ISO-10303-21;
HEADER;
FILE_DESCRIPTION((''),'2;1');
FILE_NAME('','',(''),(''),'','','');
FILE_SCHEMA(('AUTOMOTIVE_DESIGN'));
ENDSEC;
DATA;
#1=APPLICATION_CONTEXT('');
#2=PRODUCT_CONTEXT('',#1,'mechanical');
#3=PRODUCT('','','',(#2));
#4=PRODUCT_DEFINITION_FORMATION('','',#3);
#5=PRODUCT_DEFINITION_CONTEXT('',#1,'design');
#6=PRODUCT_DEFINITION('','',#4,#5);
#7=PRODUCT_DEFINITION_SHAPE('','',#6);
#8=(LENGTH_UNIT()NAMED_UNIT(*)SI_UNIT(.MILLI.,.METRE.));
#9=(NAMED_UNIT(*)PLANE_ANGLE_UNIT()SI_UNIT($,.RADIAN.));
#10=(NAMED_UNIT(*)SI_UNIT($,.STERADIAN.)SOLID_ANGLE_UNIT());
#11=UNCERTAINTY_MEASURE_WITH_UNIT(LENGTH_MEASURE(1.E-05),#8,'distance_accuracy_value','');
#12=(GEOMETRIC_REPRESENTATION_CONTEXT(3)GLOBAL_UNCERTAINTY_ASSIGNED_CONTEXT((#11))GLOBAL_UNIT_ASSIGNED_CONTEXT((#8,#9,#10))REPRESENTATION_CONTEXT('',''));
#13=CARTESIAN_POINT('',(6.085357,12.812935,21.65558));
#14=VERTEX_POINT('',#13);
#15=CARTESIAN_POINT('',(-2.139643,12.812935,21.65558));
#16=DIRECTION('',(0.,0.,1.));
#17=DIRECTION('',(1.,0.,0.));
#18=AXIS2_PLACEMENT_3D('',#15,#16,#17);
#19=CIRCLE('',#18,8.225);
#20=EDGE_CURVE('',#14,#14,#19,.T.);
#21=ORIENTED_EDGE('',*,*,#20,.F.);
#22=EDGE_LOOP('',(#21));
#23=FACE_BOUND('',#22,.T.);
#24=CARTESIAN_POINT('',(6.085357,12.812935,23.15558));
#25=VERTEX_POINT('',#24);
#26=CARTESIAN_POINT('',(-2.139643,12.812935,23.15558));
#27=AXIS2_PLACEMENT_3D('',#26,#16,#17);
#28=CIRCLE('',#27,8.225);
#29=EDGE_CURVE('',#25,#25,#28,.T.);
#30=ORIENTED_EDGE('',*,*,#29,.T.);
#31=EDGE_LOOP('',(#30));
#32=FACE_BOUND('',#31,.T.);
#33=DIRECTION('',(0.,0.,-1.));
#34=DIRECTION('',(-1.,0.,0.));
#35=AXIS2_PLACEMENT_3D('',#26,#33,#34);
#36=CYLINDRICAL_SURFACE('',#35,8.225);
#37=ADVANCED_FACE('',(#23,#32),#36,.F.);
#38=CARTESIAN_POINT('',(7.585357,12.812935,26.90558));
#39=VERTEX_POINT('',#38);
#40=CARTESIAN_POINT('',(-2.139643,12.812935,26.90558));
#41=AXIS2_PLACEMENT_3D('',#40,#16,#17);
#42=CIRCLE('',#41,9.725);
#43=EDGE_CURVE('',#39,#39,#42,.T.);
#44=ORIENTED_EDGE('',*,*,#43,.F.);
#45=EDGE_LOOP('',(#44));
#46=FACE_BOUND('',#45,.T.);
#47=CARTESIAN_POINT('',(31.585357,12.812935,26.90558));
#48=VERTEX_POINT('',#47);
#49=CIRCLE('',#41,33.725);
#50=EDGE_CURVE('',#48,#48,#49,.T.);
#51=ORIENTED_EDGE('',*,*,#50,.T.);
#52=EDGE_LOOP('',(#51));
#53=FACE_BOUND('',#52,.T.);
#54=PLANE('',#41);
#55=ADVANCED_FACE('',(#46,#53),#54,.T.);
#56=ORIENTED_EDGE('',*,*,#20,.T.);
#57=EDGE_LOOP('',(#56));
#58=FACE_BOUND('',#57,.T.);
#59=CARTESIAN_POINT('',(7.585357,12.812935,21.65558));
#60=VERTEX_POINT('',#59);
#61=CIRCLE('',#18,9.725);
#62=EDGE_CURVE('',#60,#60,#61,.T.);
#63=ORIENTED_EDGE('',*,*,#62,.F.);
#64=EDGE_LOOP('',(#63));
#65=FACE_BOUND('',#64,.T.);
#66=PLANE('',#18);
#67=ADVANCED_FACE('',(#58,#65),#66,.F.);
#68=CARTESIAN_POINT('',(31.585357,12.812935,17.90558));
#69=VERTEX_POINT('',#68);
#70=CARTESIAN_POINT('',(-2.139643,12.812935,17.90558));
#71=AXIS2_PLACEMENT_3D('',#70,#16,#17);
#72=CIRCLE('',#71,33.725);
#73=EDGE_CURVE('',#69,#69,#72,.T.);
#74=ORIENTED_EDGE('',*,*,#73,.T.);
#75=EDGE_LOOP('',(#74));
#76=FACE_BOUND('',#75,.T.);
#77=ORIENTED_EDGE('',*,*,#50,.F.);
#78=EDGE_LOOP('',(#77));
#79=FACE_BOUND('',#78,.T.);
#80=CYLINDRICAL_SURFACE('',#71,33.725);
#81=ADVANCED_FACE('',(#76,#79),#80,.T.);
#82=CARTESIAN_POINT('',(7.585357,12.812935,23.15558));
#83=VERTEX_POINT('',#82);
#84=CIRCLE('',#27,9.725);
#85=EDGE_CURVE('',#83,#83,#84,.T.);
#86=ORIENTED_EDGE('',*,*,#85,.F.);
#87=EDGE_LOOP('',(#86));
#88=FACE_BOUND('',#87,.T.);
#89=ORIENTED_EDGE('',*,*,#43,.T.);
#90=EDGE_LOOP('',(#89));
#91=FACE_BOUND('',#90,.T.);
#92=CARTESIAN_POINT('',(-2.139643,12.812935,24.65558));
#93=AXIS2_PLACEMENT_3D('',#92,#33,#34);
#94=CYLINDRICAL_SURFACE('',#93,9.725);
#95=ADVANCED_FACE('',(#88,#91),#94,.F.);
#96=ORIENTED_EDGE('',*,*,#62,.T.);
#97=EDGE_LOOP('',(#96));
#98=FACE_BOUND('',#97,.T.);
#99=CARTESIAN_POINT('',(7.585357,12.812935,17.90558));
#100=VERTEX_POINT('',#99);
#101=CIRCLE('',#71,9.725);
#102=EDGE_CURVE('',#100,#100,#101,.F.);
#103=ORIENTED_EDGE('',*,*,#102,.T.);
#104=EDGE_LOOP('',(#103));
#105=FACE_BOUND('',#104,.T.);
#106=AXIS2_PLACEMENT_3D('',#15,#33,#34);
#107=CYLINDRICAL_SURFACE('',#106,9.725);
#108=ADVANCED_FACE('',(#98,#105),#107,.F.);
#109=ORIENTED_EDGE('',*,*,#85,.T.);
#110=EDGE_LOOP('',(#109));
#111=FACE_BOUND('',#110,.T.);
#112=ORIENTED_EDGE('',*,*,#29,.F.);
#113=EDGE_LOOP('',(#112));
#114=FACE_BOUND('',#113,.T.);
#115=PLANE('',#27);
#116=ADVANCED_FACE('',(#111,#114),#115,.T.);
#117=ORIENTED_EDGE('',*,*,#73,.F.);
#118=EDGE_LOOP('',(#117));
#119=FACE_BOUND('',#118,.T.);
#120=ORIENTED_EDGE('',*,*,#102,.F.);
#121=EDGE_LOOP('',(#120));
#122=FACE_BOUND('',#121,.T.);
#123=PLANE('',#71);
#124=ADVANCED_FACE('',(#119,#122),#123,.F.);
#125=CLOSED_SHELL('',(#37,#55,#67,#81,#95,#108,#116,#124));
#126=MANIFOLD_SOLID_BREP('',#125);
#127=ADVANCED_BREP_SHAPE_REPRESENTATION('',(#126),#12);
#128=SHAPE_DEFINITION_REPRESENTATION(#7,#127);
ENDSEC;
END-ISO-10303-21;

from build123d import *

# Parameters (mm, degrees)
BOSS_EXTRUDE1_DEPTH      = 4.5
BOSS_EXTRUDE1_DEPTH_BACK = 4.5
SKETCH1_R                = 33.725
CAVITY1_START            = 20.155580463
CAVITY1_OUTLINE_R        = 8.225
CAVITY1_DEPTH            = 4.5
CAVITY1_2_OUTLINE_R      = 9.725
CAVITY1_2_OUTLINE_R_2    = 8.225
CAVITY1_2_DEPTH          = 1.5
CAVITY1_START_2          = 23.155580463
CAVITY1_3_OUTLINE_R      = 9.725
CAVITY1_3_OUTLINE_R_2    = 8.225
CAVITY1_3_DEPTH          = 1.5
CAVITY1_START_3          = 17.905580463
CAVITY1_4_OUTLINE_R      = 3.725
CAVITY1_4_DEPTH          = 2.25
CAVITY1_5_DEPTH          = 2.25
CUT_EXTRUDE1_START       = 2.25
SKETCH1_3_R              = 9.725
CUT_EXTRUDE1_DEPTH       = 2.25
CUT_EXTRUDE2_DEPTH       = 2.25


with BuildPart() as part:
    # Sketch1 → Boss-Extrude1 (new, two sides: drawn at the far end of the back side and taken through both)
    with BuildSketch(Plane.XY.offset(22.405580463).offset(-BOSS_EXTRUDE1_DEPTH_BACK)):
        with Locations((-2.139643456, 12.812935379)):
            Circle(SKETCH1_R)
    extrude(amount=BOSS_EXTRUDE1_DEPTH + BOSS_EXTRUDE1_DEPTH_BACK)

    # Cavity1: read off the stored shape, not the designer's step
    # Cavity1 outline → Cavity1 (cut)
    with BuildSketch(Plane.XY.offset(CAVITY1_START)):
        with Locations((-2.139643456, 12.812935379)):
            Circle(CAVITY1_OUTLINE_R)
    extrude(amount=CAVITY1_DEPTH, mode=Mode.SUBTRACT)

    # Cavity1 2 outline → Cavity1 2 (cut)
    with BuildSketch(Plane.XY.offset(CAVITY1_START)):
        with Locations((-2.139643456, 12.812935379)):
            Circle(CAVITY1_2_OUTLINE_R)
        with Locations((-2.139643456, 12.812935379)):
            Circle(CAVITY1_2_OUTLINE_R_2, mode=Mode.SUBTRACT)
    extrude(amount=CAVITY1_2_DEPTH, mode=Mode.SUBTRACT)

    # Cavity1 3 outline → Cavity1 3 (cut)
    with BuildSketch(Plane.XY.offset(CAVITY1_START_2)):
        with Locations((-2.139643456, 12.812935379)):
            Circle(CAVITY1_3_OUTLINE_R)
        with Locations((-2.139643456, 12.812935379)):
            Circle(CAVITY1_3_OUTLINE_R_2, mode=Mode.SUBTRACT)
    extrude(amount=CAVITY1_3_DEPTH, mode=Mode.SUBTRACT)

    # Cavity1 4 outline → Cavity1 4 (cut)
    with BuildSketch(Plane.XY.offset(CAVITY1_START_3)):
        with Locations((-2.139643456, 12.812935379)):
            Circle(CAVITY1_4_OUTLINE_R)
    extrude(amount=CAVITY1_4_DEPTH, mode=Mode.SUBTRACT)

    # Sketch1<3> → Cut-Extrude1 (cut)
    with BuildSketch(Plane.XY.offset(22.405580463).offset(CUT_EXTRUDE1_START)):
        with Locations((-2.139643456, 12.812935379)):
            Circle(SKETCH1_3_R)
    cut_extrude1 = extrude(amount=CUT_EXTRUDE1_DEPTH, mode=Mode.SUBTRACT)

    # Mirror1: Cut-Extrude1 across plane
    add(cut_extrude1.mirror(Plane.XY.offset(22.405580463)), mode=Mode.SUBTRACT)


with BuildPart() as body_2:
    # Cavity1 5 outline → Cavity1 5 (new body)
    with BuildSketch(Plane.XY.offset(CAVITY1_START_3)):
        with BuildLine():
            ThreePointArc((-4.026439682, 14.637935379), (-4.764643456, 12.812935379), (-4.026439682, 10.987935379))
            Line((-4.026439682, 10.987935379), (-0.252847229, 10.987935379))
            ThreePointArc((-0.252847229, 10.987935379), (0.485356544, 12.812935379), (-0.252847229, 14.637935379))
            Line((-0.252847229, 14.637935379), (-4.026439682, 14.637935379))
        make_face()
    extrude(amount=CAVITY1_5_DEPTH)

    # Sketch2 → Cut-Extrude2 (cut)
    with BuildSketch(Plane.XY.offset(20.155580463)):
        with BuildLine():
            Line((-0.252847229, 14.637935379), (-4.026439682, 14.637935379))
            ThreePointArc((-4.026439682, 14.637935379), (-4.764643456, 12.812935379), (-4.026439682, 10.987935379))
            Line((-4.026439682, 10.987935379), (-0.252847229, 10.987935379))
            ThreePointArc((-0.252847229, 10.987935379), (0.485356544, 12.812935379), (-0.252847229, 14.637935379))
        make_face()
    extrude(amount=-CUT_EXTRUDE2_DEPTH, mode=Mode.SUBTRACT)


solid = part.part
